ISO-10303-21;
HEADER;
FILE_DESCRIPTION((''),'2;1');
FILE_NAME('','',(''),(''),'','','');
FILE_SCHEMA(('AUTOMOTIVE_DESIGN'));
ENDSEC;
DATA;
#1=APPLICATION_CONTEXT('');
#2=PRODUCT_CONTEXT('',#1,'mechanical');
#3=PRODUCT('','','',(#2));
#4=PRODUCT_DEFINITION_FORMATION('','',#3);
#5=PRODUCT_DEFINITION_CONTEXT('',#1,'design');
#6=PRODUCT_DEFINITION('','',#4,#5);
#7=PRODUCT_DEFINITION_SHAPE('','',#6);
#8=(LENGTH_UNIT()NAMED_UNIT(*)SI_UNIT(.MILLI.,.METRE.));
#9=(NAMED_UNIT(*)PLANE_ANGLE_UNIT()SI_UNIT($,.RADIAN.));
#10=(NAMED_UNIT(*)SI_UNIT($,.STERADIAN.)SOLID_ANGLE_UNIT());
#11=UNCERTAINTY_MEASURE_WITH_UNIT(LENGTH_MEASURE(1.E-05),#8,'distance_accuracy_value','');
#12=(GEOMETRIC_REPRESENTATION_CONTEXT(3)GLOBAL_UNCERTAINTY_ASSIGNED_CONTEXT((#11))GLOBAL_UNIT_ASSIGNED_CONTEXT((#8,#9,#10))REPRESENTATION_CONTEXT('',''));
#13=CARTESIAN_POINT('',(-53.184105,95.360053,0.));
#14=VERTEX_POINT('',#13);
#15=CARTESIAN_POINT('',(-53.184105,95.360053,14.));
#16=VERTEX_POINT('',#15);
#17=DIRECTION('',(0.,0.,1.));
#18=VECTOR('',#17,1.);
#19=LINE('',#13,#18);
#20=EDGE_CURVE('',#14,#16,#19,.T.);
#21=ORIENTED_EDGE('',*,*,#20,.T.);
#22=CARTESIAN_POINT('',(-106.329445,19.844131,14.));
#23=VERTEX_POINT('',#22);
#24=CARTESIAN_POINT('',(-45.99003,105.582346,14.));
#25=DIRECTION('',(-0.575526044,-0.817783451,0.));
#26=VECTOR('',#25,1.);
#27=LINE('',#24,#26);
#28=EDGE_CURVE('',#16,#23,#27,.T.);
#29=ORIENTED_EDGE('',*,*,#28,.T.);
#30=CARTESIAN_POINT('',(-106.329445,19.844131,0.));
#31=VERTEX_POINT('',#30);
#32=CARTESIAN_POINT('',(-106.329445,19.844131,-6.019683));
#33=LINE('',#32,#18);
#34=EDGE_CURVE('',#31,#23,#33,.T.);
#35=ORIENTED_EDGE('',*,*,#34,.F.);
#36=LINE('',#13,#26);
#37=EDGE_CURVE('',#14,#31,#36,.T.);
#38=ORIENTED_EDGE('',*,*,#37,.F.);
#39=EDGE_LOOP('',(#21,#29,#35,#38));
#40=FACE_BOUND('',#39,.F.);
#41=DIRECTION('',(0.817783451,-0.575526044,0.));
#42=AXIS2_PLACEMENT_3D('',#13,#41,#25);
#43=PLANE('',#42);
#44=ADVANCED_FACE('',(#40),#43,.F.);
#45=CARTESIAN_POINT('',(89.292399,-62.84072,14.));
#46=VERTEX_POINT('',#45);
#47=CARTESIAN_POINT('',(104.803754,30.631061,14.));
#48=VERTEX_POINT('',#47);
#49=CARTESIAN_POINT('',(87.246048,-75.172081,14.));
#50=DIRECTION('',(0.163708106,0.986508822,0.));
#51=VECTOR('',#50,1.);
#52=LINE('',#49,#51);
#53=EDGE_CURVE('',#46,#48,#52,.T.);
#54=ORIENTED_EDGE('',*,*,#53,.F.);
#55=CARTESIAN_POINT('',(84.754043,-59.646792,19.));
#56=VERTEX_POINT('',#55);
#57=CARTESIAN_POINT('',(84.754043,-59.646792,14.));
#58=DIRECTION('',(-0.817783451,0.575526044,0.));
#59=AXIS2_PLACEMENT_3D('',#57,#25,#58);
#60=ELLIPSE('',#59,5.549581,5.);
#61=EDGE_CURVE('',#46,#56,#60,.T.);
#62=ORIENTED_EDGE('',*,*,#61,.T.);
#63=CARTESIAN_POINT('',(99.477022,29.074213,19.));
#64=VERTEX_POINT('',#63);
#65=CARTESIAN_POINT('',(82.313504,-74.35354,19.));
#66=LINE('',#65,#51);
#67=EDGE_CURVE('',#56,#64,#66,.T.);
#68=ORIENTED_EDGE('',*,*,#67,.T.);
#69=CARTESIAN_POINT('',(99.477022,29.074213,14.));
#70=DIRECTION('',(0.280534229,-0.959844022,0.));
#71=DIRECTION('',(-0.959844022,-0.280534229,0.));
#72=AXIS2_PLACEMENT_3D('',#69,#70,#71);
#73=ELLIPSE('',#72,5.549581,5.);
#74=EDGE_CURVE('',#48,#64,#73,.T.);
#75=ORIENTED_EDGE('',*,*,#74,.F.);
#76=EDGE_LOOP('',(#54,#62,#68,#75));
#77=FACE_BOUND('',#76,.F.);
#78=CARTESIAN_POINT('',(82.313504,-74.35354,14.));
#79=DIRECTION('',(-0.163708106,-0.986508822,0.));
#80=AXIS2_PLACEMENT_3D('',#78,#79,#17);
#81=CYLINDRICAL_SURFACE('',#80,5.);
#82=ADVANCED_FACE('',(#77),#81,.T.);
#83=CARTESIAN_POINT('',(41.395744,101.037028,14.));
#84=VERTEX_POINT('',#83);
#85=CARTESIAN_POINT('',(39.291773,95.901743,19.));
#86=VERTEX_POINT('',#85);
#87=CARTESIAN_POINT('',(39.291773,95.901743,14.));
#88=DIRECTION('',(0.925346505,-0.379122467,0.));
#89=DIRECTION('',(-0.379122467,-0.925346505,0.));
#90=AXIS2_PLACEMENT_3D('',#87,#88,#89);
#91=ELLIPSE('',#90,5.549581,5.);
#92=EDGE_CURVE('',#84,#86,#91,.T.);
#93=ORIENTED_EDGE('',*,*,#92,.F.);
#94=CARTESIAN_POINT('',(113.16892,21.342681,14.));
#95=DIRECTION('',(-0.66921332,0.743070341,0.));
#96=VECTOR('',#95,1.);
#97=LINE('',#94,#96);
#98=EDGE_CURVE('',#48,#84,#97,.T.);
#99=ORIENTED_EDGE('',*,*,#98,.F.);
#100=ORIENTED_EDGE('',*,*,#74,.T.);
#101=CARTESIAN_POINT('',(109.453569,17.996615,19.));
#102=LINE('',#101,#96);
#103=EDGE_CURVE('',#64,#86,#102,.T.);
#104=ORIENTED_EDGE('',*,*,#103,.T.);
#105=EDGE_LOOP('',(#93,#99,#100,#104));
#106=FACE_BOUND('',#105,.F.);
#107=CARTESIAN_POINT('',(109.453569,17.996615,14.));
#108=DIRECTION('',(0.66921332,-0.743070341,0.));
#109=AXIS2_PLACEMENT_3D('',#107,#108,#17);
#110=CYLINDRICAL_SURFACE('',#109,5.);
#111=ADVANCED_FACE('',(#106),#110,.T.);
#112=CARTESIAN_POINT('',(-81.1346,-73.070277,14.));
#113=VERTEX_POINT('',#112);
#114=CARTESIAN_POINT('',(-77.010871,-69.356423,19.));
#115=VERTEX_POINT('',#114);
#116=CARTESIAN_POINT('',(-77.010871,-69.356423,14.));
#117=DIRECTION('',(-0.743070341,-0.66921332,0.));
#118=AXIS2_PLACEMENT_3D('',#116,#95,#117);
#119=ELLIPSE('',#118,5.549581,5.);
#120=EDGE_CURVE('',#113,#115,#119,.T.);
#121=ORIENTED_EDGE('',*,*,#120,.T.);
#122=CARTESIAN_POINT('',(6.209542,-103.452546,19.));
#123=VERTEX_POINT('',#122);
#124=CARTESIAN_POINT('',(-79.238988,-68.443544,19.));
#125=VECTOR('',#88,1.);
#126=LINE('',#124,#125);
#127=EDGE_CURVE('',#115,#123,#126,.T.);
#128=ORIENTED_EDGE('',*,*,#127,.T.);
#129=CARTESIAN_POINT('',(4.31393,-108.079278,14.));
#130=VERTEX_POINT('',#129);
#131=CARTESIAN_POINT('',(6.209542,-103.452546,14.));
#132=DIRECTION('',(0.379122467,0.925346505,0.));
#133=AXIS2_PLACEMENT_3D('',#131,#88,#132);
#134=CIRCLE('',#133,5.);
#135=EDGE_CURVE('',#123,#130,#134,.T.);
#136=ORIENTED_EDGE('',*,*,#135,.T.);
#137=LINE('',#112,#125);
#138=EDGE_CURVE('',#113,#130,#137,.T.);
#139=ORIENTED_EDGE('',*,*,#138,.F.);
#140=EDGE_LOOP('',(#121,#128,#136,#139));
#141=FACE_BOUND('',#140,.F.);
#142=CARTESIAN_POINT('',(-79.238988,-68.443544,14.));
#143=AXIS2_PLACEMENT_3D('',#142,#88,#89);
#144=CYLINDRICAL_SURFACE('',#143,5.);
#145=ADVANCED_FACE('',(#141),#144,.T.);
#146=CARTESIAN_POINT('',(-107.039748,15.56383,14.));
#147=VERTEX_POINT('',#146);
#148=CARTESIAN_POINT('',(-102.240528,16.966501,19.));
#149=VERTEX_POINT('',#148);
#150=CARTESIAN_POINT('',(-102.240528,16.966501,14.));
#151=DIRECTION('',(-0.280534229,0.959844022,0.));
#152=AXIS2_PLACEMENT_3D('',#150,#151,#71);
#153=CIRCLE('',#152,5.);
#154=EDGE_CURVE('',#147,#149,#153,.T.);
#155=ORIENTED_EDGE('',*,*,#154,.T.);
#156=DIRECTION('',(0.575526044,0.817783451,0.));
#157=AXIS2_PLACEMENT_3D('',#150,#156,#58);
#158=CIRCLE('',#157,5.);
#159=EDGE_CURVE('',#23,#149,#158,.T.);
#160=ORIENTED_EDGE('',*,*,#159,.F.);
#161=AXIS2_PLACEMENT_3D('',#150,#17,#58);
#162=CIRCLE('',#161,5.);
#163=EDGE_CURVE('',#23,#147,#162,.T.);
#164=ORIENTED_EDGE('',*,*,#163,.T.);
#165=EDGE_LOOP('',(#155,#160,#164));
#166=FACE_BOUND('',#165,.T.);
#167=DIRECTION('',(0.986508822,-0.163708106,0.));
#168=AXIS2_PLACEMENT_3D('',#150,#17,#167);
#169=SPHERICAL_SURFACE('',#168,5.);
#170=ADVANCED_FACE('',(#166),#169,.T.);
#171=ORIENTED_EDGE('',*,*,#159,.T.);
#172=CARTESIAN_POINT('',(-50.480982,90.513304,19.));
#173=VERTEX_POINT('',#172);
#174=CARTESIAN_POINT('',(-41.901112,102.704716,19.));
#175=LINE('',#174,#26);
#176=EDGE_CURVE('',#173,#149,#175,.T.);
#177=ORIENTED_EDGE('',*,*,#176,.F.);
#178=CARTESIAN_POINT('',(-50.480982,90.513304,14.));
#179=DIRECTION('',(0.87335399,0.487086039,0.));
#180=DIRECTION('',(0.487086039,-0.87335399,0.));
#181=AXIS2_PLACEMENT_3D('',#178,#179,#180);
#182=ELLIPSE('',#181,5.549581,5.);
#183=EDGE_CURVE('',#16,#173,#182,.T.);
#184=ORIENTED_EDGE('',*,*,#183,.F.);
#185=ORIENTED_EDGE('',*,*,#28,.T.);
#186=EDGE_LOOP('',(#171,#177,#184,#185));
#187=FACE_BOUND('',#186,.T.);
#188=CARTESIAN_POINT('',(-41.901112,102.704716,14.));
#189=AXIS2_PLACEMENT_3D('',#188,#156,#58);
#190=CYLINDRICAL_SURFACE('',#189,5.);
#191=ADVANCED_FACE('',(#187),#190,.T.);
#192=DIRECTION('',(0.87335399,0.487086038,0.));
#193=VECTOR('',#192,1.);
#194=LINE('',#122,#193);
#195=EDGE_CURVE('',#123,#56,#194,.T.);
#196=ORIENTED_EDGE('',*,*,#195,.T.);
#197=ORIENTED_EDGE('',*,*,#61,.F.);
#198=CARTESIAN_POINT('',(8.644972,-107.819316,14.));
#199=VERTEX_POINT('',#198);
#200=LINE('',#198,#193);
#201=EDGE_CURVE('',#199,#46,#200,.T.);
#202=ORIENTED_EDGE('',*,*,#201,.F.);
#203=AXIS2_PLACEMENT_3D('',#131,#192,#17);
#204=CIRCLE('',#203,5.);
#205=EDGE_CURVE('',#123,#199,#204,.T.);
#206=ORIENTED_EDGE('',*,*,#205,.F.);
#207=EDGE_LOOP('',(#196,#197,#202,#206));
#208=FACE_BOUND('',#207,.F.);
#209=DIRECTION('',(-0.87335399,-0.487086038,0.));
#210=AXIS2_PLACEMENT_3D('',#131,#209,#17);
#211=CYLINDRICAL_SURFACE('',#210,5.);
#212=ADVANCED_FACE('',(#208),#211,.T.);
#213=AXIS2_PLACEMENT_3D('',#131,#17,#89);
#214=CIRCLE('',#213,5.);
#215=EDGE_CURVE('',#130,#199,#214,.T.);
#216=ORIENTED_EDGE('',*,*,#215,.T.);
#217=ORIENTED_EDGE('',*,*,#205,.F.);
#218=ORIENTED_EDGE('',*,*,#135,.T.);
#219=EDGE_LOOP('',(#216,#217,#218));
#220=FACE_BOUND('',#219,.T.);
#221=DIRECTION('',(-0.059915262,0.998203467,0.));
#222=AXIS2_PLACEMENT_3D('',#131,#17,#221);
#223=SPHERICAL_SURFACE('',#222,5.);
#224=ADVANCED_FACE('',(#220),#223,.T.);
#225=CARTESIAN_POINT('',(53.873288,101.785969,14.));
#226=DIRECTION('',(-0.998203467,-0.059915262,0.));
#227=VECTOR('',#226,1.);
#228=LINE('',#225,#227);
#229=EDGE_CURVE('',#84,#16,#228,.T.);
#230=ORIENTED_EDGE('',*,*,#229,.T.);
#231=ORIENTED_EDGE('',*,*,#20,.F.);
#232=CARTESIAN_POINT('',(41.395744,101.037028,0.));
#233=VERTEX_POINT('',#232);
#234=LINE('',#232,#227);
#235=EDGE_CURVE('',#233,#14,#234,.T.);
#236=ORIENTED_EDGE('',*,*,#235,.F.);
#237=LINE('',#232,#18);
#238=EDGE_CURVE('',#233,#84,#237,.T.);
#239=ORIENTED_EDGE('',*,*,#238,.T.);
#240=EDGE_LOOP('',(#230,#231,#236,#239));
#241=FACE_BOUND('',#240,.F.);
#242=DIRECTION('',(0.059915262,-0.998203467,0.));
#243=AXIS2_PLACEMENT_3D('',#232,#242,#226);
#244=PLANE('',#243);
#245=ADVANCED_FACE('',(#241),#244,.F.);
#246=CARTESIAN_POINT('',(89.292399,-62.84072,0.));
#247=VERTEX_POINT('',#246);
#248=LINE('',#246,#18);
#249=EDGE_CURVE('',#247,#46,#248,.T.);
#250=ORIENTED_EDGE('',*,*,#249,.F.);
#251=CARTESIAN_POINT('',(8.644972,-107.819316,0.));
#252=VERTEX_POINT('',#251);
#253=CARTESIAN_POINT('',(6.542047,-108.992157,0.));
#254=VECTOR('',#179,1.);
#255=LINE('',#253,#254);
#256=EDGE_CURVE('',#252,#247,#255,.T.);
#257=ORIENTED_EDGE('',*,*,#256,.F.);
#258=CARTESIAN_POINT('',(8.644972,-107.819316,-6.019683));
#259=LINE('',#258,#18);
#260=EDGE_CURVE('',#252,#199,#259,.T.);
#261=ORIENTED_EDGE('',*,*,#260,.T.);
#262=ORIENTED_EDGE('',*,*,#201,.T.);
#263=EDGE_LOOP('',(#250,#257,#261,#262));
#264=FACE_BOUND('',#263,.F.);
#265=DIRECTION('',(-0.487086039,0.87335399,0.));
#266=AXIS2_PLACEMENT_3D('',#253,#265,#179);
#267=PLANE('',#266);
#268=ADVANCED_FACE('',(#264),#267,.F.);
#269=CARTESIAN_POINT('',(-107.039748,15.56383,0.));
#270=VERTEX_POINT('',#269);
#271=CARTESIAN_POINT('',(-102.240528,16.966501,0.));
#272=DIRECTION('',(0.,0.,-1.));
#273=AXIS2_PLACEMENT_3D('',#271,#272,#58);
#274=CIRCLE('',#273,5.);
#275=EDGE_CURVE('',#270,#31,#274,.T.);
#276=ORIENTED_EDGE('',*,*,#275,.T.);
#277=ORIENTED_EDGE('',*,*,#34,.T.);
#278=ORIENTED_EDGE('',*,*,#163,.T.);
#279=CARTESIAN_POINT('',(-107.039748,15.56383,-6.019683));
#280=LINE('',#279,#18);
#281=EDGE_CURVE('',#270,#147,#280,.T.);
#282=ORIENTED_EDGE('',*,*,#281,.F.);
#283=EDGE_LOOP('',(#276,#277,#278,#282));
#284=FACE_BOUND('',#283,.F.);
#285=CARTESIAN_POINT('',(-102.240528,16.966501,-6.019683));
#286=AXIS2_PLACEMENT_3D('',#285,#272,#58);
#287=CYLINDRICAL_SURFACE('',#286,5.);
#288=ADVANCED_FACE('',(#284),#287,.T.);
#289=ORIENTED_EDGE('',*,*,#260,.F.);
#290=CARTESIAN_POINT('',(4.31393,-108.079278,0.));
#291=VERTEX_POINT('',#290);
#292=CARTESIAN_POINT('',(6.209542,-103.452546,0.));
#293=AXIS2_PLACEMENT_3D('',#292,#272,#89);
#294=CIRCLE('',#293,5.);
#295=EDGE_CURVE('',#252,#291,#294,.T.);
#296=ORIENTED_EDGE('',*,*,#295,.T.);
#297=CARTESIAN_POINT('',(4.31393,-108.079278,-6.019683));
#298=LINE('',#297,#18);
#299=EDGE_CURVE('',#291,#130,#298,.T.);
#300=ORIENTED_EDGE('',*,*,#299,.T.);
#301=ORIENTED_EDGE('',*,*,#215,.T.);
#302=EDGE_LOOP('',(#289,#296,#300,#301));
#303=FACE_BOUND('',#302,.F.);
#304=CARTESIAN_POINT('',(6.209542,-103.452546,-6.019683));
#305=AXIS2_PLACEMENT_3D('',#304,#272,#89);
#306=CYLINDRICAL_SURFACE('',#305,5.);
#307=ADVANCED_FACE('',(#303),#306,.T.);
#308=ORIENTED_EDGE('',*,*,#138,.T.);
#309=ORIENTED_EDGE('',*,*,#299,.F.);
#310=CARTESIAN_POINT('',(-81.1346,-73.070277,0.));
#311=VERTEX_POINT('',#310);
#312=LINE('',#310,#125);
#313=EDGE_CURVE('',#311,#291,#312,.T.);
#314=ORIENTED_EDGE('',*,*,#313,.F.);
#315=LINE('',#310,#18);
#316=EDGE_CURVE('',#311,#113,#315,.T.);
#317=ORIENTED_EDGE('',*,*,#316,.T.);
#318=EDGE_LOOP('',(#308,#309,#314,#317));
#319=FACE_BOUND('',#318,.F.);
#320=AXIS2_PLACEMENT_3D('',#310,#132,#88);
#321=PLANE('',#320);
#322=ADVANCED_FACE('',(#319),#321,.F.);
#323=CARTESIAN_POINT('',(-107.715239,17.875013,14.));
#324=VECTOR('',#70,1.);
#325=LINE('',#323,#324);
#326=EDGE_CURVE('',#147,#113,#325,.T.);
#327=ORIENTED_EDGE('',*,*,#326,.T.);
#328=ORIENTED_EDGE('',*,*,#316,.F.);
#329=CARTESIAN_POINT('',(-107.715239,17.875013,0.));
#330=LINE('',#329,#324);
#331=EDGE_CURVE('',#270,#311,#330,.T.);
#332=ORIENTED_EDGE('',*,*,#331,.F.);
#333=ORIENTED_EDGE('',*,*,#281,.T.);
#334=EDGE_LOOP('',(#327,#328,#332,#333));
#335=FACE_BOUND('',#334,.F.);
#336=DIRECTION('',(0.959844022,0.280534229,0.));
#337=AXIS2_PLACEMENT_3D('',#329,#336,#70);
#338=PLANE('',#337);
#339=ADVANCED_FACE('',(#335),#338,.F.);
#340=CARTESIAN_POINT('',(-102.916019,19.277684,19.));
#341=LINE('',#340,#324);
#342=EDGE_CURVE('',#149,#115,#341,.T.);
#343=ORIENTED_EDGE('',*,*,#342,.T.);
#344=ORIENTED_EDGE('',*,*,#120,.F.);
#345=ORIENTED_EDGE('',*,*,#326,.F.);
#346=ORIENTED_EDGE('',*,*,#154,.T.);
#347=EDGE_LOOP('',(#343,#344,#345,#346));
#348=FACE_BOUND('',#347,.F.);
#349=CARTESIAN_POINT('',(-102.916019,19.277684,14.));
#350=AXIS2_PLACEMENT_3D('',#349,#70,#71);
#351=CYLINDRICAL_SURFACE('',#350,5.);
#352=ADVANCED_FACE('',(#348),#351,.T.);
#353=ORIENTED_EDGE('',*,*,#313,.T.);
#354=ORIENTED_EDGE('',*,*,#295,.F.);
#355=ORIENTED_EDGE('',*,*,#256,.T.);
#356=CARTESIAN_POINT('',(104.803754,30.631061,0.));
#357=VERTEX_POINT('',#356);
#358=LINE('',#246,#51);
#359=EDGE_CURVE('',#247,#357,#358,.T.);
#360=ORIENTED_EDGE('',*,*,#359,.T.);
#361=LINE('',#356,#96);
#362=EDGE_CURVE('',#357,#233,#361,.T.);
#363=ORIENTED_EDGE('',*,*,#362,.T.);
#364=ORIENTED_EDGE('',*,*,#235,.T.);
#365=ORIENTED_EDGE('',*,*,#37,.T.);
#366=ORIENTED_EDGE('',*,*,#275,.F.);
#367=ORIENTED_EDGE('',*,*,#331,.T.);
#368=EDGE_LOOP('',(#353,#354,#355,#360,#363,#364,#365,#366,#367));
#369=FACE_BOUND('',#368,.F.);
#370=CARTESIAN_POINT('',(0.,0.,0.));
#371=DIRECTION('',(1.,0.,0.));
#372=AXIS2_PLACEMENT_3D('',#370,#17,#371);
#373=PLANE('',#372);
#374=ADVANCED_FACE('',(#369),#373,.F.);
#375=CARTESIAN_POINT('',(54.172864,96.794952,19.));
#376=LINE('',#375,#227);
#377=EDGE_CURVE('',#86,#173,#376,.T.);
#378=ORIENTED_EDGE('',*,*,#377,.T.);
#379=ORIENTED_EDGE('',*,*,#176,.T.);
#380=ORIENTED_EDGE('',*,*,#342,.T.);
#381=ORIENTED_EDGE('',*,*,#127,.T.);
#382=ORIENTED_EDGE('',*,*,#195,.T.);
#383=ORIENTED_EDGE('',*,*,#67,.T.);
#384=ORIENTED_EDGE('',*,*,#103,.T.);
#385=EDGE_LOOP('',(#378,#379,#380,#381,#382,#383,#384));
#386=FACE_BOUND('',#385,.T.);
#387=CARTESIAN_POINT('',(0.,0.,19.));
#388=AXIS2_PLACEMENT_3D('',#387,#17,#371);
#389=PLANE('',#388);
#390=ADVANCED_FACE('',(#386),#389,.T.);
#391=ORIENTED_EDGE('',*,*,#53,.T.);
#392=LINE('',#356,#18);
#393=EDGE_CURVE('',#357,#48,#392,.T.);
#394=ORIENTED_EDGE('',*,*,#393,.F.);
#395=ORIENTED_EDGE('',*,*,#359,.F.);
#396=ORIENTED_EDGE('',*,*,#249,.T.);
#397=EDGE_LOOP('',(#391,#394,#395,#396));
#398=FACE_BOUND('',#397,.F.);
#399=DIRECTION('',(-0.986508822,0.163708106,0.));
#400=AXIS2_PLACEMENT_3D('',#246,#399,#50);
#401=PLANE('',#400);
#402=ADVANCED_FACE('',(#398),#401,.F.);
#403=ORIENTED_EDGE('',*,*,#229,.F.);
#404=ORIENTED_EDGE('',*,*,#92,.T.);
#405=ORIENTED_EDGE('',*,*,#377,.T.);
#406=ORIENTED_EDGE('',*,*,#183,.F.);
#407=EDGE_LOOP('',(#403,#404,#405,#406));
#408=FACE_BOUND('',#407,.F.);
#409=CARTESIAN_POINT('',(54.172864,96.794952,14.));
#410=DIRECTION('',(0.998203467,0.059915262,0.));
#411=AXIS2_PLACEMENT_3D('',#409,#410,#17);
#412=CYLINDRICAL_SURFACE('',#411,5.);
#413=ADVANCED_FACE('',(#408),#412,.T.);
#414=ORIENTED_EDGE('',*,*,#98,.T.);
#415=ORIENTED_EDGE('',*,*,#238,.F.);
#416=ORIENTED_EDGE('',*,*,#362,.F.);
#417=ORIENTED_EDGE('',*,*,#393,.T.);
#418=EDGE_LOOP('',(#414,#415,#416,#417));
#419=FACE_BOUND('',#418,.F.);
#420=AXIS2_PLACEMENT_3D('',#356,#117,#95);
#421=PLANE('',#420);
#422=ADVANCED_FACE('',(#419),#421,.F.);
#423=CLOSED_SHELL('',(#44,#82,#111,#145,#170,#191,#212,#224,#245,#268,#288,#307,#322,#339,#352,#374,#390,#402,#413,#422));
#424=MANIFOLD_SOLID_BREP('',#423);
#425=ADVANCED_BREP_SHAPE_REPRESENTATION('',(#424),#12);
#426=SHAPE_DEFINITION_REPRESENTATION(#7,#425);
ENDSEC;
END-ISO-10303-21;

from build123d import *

# Parameters (mm, degrees)
F1_DEPTH     = 19
F2_R         = 5
F3_T1_DEPTH  = 104.8421979693
F3_T3_DEPTH  = 119.7500710634
F3_T5_DEPTH  = 119.7500710634
F3_T7_DEPTH  = 119.7500710634
F3_T9_DEPTH  = 104.8421979693
F3_T11_DEPTH = 20.0196827351
F3_T16_DEPTH = 5
F3_T22_DEPTH = 5


# Not quite as in the source:
# - a fillet or chamfer that OpenCascade refuses, or shapes differently, is made with other operations: its cross-section is extruded or revolved along the edge and cut away or added


with BuildPart() as f1:
    # F0 (on Top) → F1 (new body)
    with BuildSketch(Plane.XY):
        Polygon((41.3957443257, 101.0370281819), (-53.1841051002, 95.3600528356), (-107.7152386276, 17.8750127135), (-81.134600478, -73.0702765657), (6.5420466758, -108.9921572289), (89.2923992493, -62.8407204639), (104.8037539551, 30.6310605275), align=None)
    extrude(amount=F1_DEPTH)

    # F2
    f2_edges = [f1.edges().sort_by_distance(p)[0] for p in [
        (-94.42492, -27.597632, 19),
        (-37.296277, -91.031217, 19),
    ]]
    fillet(f2_edges, radius=F2_R)

    # F3: fillet of radius 5 on 7 edges, made by hand

    # F3_s2 → F3_t1 (cut)
    with BuildSketch(Plane(origin=(-39.2722507137, -21.9028770158, 0), x_dir=(0, 0, 1), z_dir=(0.8733539896, 0.4870860385, 0))):
        with BuildLine():
            ThreePointArc((19, 93.3752749449), (17.5355339059, 96.9108088508), (14, 98.3752749449))
            Line((14, 98.3752749449), (19, 98.3752749449))
            Line((19, 98.3752749449), (19, 93.3752749449))
        make_face()
    extrude(amount=F3_T1_DEPTH, mode=Mode.SUBTRACT)

    # F3_s4 → F3_t3 (cut)
    with BuildSketch(Plane(origin=(-9.8020286817, -59.067250771, 0), x_dir=(0, 0, 1), z_dir=(0.1637081063, 0.986508822, 0))):
        with BuildLine():
            ThreePointArc((19, 93.3752749449), (17.5355339059, 96.9108088508), (14, 98.3752749449))
            Line((14, 98.3752749449), (19, 98.3752749449))
            Line((19, 98.3752749449), (19, 93.3752749449))
        make_face()
    extrude(amount=F3_T3_DEPTH, mode=Mode.SUBTRACT)

    # F3_s6 → F3_t5 (cut)
    with BuildSketch(Plane(origin=(40.0691713151, -44.4913630949, 0), x_dir=(0, 0, 1), z_dir=(-0.66921332, 0.7430703414, 0))):
        with BuildLine():
            ThreePointArc((19, 93.3752749449), (17.5355339059, 96.9108088508), (14, 98.3752749449))
            Line((14, 98.3752749449), (19, 98.3752749449))
            Line((19, 98.3752749449), (19, 93.3752749449))
        make_face()
    extrude(amount=F3_T5_DEPTH, mode=Mode.SUBTRACT)

    # F3_s8 → F3_t7 (cut)
    with BuildSketch(Plane(origin=(59.7674680494, 3.58742845, 0), x_dir=(0, 0, 1), z_dir=(-0.9982034669, -0.0599152621, 0))):
        with BuildLine():
            ThreePointArc((19, 93.3752749449), (17.5355339059, 96.9108088508), (14, 98.3752749449))
            Line((14, 98.3752749449), (19, 98.3752749449))
            Line((19, 98.3752749449), (19, 93.3752749449))
        make_face()
    extrude(amount=F3_T7_DEPTH, mode=Mode.SUBTRACT)

    # F3_s10 → F3_t9 (cut)
    with BuildSketch(Plane(origin=(34.4596423084, 48.9648132019, 0), x_dir=(0, 0, 1), z_dir=(-0.5755260436, -0.8177834513, 0))):
        with BuildLine():
            ThreePointArc((14, 98.3752749449), (17.5355339059, 96.9108088508), (19, 93.3752749449))
            Line((19, 93.3752749449), (19, 98.3752749449))
            Line((19, 98.3752749449), (14, 98.3752749449))
        make_face()
    extrude(amount=F3_T9_DEPTH, mode=Mode.SUBTRACT)

    # F3_s12 → F3_t11 (cut)
    with BuildSketch(Plane.XY.offset(-6.0196827351)):
        with BuildLine():
            ThreePointArc((-106.3294449524, 19.8441314825), (-107.1730718062, 17.7850417962), (-107.0397478053, 15.5638301188))
            Line((-107.0397478053, 15.5638301188), (-107.7152386276, 17.8750127135))
            Line((-107.7152386276, 17.8750127135), (-106.3294449524, 19.8441314825))
        make_face()
        with BuildLine():
            ThreePointArc((4.3139297226, -108.0792784419), (6.5091183669, -108.443563249), (8.6449722488, -107.8193158622))
            Line((8.6449722488, -107.8193158622), (6.5420466758, -108.9921572289))
            Line((6.5420466758, -108.9921572289), (4.3139297226, -108.0792784419))
        make_face()
    extrude(amount=F3_T11_DEPTH, mode=Mode.SUBTRACT)


with BuildPart() as f3_tool14:
    # F3_s15 → F3_t16 (new body)
    with BuildSketch(Plane.XY.offset(14)):
        Polygon((6.2095420561, -103.4525459145), (4.3139297226, -108.0792784419), (6.5420466758, -108.9921572289), (8.6449722488, -107.8193158622), align=None)
    extrude(amount=F3_T16_DEPTH)

    # F3_s17 → F3_t18 (revolve, cut)
    with BuildSketch(Plane(origin=(6.2095420561, -103.4525459145, 14), x_dir=(-0.0599152621, 0.9982034669, 0), z_dir=(0.9982034669, 0.0599152621, 0))):
        with BuildLine():
            ThreePointArc((0, -5), (5, 0), (0, 5))
            Line((0, 5), (0, -5))
        make_face()
    revolve(axis=Axis((6.2095420561, -103.4525459145, 14), (0, 0, 1)), mode=Mode.SUBTRACT)


with BuildPart() as f1_1:
    add(f1.part)

    # F3_t13: cut F3_tool14
    add(f3_tool14.part, mode=Mode.SUBTRACT)


with BuildPart() as f3_tool20:
    # F3_s21 → F3_t22 (new body)
    with BuildSketch(Plane.XY.offset(14)):
        Polygon((-102.240527696, 16.9665012646), (-106.3294449524, 19.8441314825), (-107.7152386276, 17.8750127135), (-107.0397478053, 15.5638301188), align=None)
    extrude(amount=F3_T22_DEPTH)

    # F3_s23 → F3_t24 (revolve, cut)
    with BuildSketch(Plane(origin=(-102.240527696, 16.9665012646, 14), x_dir=(0.986508822, -0.1637081063, 0), z_dir=(-0.1637081063, -0.986508822, 0))):
        with BuildLine():
            ThreePointArc((0, -5), (5, 0), (0, 5))
            Line((0, 5), (0, -5))
        make_face()
    revolve(axis=Axis((-102.240527696, 16.9665012646, 14), (0, 0, 1)), mode=Mode.SUBTRACT)


with BuildPart() as f1_2:
    add(f1_1.part)

    # F3_t19: cut F3_tool20
    add(f3_tool20.part, mode=Mode.SUBTRACT)


solid = f1_2.part
